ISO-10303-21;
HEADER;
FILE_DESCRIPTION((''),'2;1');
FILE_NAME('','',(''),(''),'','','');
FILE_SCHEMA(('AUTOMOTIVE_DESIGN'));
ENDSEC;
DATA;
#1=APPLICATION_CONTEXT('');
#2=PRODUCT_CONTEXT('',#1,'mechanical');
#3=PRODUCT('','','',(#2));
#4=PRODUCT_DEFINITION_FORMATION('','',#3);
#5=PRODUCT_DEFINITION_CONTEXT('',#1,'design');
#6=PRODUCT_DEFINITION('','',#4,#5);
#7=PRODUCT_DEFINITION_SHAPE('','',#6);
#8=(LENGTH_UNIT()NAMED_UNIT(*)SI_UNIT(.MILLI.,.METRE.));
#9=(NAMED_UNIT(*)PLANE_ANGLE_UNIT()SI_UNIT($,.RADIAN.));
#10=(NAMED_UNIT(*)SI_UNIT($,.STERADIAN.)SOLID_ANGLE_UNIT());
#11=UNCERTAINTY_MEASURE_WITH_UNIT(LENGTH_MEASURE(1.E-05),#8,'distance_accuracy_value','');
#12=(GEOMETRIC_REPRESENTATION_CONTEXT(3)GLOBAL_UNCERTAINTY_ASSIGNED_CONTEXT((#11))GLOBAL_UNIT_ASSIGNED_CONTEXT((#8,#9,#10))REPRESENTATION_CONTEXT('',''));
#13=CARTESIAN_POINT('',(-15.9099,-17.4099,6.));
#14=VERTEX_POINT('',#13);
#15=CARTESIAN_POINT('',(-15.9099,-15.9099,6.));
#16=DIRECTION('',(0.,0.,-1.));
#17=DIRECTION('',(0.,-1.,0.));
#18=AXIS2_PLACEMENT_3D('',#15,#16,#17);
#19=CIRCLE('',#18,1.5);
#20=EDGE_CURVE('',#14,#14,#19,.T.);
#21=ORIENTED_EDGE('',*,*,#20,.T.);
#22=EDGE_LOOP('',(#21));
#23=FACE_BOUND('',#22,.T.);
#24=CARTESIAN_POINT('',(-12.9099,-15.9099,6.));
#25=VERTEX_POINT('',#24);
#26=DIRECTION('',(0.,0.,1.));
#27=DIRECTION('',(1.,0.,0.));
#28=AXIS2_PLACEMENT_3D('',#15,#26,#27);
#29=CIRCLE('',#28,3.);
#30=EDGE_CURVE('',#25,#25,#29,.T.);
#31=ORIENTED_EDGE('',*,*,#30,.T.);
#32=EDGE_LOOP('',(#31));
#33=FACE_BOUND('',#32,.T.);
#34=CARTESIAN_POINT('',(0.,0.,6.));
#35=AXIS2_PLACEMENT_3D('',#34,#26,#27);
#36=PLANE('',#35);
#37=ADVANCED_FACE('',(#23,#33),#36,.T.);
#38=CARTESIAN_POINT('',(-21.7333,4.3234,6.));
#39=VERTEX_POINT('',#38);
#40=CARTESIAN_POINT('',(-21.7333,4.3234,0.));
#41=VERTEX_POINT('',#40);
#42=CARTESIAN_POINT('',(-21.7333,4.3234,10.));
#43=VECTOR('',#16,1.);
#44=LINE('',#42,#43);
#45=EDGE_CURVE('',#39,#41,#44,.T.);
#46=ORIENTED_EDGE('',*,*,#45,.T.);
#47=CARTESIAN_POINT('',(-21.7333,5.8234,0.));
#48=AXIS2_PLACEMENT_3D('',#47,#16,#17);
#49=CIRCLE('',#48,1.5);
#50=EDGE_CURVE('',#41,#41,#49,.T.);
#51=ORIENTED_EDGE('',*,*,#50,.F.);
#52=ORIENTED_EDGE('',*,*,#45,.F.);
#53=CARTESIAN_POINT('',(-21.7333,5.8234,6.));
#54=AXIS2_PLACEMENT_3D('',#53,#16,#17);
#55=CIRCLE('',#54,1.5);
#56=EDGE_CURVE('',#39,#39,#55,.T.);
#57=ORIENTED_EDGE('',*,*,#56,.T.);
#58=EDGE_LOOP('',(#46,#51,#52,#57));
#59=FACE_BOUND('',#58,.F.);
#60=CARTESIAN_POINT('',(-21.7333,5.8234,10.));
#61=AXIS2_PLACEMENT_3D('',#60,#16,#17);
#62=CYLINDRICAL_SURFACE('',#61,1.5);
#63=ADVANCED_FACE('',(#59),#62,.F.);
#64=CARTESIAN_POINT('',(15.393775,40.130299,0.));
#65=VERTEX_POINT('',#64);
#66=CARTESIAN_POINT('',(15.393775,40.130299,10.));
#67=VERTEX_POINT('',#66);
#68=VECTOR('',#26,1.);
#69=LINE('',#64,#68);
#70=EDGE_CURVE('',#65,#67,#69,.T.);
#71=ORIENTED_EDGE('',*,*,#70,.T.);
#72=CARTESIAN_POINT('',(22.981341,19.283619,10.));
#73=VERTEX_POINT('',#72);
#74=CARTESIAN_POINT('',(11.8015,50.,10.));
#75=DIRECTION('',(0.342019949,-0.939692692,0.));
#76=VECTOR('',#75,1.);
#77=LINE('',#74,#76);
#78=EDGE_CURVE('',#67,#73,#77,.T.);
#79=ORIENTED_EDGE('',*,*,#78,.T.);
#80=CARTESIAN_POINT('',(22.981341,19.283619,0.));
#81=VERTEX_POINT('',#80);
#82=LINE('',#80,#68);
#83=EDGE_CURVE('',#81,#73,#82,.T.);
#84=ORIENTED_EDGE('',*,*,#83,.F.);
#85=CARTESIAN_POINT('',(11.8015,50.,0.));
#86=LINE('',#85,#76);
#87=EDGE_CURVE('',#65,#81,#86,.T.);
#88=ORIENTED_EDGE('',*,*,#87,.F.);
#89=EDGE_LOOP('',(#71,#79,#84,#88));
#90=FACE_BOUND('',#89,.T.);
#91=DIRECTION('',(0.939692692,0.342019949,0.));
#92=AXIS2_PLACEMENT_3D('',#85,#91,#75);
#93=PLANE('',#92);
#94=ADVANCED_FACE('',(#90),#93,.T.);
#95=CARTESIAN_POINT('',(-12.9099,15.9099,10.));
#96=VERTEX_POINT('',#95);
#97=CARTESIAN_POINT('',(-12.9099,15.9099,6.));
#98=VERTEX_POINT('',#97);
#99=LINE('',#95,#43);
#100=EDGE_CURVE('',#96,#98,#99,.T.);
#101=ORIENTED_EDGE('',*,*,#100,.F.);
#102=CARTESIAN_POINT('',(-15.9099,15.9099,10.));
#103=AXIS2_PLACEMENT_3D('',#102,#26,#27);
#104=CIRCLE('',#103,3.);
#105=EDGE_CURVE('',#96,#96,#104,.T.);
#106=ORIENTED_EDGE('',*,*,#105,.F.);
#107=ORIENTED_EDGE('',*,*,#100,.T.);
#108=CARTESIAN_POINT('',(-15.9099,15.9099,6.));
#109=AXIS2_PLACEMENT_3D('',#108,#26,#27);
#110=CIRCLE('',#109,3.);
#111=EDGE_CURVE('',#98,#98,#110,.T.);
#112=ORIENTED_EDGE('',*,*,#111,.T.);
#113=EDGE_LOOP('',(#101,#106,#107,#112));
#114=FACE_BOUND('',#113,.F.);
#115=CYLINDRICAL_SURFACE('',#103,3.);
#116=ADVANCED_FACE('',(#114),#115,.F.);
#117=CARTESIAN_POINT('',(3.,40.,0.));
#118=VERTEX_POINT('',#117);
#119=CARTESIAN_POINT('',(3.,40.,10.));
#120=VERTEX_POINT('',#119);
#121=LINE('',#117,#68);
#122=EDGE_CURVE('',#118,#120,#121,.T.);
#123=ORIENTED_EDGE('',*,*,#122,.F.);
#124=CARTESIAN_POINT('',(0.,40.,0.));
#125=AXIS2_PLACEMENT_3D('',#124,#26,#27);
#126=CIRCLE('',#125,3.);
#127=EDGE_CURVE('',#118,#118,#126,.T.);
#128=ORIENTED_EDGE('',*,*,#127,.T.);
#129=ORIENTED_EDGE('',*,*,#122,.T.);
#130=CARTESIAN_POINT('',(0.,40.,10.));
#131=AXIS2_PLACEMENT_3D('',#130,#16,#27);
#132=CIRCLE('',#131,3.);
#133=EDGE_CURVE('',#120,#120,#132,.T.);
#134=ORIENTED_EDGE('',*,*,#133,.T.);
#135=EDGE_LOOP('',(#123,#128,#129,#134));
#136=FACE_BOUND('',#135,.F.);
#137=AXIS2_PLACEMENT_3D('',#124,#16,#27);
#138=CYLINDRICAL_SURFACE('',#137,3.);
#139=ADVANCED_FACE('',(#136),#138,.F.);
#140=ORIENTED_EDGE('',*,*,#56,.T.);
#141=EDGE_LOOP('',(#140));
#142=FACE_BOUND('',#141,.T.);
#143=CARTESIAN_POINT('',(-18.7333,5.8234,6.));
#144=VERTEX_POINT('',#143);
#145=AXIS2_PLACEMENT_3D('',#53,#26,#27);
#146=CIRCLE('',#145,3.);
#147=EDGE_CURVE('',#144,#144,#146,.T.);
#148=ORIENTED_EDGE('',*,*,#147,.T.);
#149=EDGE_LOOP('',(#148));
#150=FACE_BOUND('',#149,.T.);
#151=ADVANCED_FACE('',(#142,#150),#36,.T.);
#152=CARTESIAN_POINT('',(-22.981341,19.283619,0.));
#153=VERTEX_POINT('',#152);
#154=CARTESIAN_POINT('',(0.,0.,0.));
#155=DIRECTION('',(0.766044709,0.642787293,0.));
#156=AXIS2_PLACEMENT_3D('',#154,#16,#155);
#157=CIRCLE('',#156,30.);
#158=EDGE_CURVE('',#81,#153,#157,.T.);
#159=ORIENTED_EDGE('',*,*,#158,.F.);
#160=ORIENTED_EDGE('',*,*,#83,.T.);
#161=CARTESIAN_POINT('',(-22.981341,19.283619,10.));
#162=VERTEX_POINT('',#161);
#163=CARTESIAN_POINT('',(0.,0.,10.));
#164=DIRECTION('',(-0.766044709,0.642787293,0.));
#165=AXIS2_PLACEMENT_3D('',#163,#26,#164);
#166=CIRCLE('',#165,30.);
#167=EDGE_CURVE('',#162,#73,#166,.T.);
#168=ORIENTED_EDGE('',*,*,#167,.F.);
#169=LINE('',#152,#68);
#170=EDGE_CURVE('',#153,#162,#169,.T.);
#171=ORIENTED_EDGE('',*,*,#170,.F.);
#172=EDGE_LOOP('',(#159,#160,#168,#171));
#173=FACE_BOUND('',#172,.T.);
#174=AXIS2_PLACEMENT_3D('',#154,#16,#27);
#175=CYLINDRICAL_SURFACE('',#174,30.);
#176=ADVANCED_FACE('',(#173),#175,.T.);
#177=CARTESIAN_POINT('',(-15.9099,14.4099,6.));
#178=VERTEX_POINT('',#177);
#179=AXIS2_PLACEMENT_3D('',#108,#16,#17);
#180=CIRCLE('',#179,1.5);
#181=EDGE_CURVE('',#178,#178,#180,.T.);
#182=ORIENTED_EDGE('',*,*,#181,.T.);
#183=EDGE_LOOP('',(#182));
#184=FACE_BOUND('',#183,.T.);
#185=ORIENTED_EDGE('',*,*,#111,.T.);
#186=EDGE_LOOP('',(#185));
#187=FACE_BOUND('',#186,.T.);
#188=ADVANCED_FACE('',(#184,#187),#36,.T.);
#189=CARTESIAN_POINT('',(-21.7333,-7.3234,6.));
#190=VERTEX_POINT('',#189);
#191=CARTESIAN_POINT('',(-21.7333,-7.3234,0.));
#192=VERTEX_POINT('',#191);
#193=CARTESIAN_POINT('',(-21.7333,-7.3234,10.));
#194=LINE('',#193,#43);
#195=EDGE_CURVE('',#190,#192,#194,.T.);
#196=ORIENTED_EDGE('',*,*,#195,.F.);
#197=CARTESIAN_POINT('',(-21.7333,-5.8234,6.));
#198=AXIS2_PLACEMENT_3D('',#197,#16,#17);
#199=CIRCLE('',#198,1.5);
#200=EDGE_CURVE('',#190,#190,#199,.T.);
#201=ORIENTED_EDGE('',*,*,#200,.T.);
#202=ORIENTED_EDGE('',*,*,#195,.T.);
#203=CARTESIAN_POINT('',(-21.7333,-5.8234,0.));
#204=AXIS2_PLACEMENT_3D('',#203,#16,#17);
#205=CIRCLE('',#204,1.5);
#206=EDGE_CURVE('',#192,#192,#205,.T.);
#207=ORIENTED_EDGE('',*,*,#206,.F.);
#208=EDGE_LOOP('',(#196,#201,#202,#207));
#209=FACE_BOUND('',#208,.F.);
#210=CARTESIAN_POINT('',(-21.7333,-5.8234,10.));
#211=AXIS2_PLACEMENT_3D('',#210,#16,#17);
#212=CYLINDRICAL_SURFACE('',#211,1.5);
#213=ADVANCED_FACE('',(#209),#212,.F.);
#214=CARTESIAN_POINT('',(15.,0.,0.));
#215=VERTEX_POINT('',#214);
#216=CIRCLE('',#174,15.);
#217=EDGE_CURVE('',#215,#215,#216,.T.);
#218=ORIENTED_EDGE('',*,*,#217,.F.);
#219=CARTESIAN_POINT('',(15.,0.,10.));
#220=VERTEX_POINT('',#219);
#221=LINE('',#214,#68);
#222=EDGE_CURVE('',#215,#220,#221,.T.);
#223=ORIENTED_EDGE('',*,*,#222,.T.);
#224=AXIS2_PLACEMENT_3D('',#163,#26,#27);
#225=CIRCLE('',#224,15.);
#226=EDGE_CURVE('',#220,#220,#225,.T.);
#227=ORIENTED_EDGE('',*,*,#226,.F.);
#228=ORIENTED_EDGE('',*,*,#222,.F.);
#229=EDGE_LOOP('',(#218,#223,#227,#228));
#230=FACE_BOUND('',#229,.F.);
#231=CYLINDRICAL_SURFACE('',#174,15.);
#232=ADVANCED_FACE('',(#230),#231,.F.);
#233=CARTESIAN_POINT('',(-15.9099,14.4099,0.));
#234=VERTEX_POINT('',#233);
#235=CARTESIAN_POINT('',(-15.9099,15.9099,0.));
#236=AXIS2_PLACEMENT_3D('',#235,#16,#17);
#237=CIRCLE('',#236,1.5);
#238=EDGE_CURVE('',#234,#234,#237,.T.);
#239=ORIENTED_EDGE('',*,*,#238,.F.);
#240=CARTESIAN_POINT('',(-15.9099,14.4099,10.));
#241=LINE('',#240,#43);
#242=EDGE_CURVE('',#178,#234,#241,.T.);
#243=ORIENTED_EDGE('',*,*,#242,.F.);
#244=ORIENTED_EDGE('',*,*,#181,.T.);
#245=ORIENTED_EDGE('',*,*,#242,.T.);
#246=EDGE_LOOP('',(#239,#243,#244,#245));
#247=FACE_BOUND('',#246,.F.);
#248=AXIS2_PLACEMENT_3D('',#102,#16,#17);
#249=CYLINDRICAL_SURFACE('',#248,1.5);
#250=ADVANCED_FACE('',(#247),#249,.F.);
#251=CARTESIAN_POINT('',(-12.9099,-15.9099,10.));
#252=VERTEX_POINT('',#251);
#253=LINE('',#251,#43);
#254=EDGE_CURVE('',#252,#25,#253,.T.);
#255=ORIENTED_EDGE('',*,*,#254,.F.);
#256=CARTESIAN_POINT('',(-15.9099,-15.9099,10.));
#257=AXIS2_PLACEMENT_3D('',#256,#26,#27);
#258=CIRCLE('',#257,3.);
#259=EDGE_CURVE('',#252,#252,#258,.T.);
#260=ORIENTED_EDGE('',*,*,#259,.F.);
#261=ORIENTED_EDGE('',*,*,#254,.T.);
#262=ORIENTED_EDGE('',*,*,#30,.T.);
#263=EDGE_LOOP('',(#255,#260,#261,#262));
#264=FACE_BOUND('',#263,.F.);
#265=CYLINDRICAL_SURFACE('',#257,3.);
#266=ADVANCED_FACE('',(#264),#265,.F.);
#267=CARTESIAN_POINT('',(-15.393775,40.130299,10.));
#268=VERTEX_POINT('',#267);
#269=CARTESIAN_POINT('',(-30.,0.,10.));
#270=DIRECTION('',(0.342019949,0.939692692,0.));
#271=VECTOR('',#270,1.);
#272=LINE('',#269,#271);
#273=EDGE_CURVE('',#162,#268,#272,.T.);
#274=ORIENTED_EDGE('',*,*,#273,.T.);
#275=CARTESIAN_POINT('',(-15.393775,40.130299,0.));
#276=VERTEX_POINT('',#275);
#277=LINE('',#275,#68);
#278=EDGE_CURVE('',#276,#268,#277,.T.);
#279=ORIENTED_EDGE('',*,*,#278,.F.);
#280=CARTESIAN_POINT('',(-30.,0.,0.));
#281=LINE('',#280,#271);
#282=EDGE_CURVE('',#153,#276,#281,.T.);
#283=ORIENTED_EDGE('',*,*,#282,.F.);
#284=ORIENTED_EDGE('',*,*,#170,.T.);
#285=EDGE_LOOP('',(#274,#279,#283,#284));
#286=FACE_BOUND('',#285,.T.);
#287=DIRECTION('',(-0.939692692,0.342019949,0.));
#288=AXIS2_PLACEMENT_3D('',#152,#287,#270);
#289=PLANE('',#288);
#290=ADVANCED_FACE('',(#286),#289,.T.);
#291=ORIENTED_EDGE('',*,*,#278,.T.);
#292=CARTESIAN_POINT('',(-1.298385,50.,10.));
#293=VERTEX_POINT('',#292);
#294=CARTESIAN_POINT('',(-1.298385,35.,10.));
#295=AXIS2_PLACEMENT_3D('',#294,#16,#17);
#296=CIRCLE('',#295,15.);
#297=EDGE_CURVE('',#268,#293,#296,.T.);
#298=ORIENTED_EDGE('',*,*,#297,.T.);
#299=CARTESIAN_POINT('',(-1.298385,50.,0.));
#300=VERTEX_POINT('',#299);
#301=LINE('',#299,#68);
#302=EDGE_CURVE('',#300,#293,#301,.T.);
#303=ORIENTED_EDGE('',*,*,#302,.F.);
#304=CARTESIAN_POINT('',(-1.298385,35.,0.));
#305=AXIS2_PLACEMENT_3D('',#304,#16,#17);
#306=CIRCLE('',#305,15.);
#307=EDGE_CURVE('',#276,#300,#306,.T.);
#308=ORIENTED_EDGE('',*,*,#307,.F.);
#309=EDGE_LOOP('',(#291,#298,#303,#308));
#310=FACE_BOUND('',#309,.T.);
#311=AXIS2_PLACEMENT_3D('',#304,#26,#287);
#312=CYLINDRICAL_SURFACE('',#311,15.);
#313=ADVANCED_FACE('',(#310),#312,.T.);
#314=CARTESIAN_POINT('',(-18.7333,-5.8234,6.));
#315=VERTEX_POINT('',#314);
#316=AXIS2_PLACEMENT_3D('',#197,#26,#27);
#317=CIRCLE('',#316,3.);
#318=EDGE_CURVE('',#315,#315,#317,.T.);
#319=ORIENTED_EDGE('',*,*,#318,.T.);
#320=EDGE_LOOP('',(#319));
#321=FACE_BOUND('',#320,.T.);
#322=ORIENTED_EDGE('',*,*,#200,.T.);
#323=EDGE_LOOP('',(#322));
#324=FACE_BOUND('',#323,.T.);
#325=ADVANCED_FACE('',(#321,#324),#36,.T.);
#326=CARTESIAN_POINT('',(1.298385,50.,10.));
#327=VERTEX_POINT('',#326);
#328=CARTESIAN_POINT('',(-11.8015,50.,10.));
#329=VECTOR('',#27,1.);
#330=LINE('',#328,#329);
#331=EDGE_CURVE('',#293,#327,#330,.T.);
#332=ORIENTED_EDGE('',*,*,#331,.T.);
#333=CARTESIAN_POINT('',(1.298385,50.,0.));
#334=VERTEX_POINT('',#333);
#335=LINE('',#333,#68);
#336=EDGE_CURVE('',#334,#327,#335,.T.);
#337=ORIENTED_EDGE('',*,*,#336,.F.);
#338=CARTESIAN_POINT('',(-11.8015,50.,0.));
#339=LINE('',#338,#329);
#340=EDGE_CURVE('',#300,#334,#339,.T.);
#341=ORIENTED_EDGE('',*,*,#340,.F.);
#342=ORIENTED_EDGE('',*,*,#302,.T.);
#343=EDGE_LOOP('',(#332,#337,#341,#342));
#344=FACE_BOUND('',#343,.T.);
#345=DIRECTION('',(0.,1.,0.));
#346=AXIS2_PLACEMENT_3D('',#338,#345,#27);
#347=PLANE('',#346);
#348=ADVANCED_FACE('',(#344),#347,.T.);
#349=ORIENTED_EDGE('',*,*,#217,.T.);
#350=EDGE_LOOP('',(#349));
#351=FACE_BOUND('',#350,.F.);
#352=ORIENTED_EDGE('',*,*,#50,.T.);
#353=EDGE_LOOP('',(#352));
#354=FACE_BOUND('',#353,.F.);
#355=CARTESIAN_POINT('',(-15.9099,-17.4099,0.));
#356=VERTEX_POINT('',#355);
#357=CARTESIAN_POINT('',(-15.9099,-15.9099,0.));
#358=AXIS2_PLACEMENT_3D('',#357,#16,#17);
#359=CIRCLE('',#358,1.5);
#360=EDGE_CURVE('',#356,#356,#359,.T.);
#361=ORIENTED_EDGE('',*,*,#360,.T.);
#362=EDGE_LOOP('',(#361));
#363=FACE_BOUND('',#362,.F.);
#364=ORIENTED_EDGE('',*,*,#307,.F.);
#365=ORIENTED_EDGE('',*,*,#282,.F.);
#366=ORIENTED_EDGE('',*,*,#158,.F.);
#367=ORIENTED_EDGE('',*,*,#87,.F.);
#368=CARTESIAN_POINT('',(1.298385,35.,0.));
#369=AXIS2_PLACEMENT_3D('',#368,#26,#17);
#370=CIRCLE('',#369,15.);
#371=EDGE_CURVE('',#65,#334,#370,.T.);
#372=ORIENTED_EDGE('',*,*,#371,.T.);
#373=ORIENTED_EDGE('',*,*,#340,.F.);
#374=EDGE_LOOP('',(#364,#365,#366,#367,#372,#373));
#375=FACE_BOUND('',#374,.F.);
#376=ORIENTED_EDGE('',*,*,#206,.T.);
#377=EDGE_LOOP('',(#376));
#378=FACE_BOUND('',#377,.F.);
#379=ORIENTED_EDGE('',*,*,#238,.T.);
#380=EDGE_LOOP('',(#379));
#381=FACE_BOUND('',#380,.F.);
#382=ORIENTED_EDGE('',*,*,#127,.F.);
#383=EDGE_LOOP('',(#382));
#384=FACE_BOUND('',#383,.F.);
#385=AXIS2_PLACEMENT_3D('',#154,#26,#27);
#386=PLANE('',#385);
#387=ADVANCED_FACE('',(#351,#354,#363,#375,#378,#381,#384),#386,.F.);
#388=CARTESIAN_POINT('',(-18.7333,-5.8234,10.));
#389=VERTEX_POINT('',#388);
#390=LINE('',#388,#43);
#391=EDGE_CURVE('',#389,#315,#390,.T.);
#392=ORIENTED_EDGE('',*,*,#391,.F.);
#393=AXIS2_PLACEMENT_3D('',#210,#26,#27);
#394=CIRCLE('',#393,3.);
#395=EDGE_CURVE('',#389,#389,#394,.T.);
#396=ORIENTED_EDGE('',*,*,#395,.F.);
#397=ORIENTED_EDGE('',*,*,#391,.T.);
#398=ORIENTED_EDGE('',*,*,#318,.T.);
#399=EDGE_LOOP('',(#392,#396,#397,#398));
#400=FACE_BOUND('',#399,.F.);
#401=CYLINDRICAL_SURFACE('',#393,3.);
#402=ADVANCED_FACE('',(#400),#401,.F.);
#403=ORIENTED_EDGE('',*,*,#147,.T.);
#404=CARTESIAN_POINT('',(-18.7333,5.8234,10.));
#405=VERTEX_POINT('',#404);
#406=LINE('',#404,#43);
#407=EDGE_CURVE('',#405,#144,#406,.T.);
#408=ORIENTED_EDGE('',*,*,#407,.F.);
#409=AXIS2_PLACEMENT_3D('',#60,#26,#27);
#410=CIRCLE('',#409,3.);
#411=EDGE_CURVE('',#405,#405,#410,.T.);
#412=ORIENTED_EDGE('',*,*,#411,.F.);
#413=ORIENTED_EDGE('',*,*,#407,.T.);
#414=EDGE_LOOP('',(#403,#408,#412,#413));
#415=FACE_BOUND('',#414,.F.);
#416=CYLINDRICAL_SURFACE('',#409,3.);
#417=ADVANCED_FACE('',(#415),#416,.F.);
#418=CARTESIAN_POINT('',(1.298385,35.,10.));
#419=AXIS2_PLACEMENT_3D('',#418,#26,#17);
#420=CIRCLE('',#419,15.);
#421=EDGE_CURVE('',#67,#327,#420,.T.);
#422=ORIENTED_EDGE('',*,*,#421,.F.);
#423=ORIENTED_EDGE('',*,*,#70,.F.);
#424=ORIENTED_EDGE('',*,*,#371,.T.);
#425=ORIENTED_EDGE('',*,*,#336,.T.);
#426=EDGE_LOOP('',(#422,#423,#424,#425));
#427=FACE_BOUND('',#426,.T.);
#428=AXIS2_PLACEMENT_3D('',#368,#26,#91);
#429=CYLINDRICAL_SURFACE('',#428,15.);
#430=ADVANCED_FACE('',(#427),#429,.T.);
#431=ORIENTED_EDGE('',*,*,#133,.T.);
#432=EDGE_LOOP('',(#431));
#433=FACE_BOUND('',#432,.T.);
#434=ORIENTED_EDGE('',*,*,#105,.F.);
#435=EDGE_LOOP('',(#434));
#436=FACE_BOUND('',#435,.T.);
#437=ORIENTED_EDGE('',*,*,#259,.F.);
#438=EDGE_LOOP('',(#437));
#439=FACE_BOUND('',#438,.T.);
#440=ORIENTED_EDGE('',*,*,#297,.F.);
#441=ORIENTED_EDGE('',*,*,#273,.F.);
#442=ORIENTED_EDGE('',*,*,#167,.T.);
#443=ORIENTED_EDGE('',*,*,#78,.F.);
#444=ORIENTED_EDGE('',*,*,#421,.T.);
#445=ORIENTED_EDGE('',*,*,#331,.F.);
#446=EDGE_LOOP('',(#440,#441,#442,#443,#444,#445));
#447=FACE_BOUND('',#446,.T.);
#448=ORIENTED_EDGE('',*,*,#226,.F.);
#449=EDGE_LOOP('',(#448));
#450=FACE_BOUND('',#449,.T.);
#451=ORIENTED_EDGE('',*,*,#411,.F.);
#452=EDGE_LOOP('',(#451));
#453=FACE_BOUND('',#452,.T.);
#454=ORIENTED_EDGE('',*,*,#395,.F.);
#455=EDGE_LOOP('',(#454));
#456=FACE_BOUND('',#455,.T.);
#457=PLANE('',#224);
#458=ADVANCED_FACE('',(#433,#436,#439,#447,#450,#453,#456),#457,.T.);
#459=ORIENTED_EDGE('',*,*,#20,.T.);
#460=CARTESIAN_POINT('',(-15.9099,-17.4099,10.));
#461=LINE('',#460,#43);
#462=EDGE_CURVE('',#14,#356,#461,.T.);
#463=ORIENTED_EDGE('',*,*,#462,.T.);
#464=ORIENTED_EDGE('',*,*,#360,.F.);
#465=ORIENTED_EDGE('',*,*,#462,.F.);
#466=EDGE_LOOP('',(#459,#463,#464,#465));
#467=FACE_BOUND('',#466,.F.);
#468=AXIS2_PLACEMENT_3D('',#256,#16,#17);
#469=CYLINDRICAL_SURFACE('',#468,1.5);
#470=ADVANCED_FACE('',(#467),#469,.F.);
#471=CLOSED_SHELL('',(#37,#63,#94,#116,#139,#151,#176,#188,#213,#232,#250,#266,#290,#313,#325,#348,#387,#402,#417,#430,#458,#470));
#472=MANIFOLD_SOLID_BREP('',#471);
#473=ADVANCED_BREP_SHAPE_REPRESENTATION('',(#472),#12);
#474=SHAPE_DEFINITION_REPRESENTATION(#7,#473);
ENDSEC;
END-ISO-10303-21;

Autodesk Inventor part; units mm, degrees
ref_plane "YZ Plane" through (0, 0, 0) normal (1, 0, 0) x (0, 1, 0)
ref_plane "XZ Plane" through (0, 0, 0) normal (0, 1, 0) x (-1, 0, 0)
ref_plane "XY Plane" through (0, 0, 0) normal (0, 0, 1) x (1, 0, 0)
sketch "スケッチ12" plane through (0, 0, 0) normal (0, 0, 1) x (1, 0, 0)
  circle A0 centre (0, 0) radius 30
  circle A1 centre (0, 0) radius 15
  line L0 (-30, 0) -> (30, 0)
  line L1 (-30, 0) -> (-11.8015, 50)
  line L2 (-11.8015, 50) -> (11.8015, 50)
  line L3 (11.8015, 50) -> (30, 0)
  circle A2 centre (0, 40) radius 3
  line L4 (11.8015, 50) -> (-30, 0)
  line L5 (-11.8015, 50) -> (30, 0)
  point P0 (22.9813, 19.2836)
  point P1 (-22.9813, 19.2836)
  point P2 (0, 51.9615)
  point P3 (5.316, 29.5252)
  point P4 (-5.316, 29.5252)
  point P5 (-2.2669, 48.0351)
  point P6 (2.2669, 48.0351)
  point P7 (0, 35.8839)
  point P8 (-15, 0)
  point P9 (15, 0)
  dimension "d5" = 60
  dimension "d6" = 30
  dimension "d10" = 70
  dimension "d11" = 70
  dimension "d12" = 50
  dimension "d13" = 40
  dimension "d14" = 6
  dimension "d38" = 30
extrude "押し出し2" add sketch "スケッチ12" along normal blind 10 contours L0 A1 A0 | L4 A0 L5 L0 A1 | A0 L1 | L1 A0 L4 | L3 A0 | L5 A0 L3 | L1 L5 A2 L4 A0 | L4 L5 A0 | A0 L5 L4 A2 L3 | L2 L4 A2 L5 | L5 A2 L4 picked at (0.1887, 36.6459)
sketch "スケッチ13" plane through (0, 0, 10) normal (0, 0, 1) x (1, 0, 0)
  circle A0 centre (0, 0) radius 20
  circle A1 centre (0, 0) radius 25
  circle A2 centre (0, 0) radius 22.5
  line L0 (0, 0) -> (-18.638, 32.282)
  line L1 (-18.638, 32.282) -> (0, 0)
  line L2 (0, 0) -> (-17.2844, -29.9374)
  line L3 (0, 0) -> (-56.8729, 0)
  line L4 (0, 0) -> (-31.7394, -18.3248)
  line L5 (0, 0) -> (-33.3883, 19.2767)
  line L6 (0, 0) -> (0, -31.9785)
  line L7 (0, 0) -> (-25.7143, 25.7143)
  line L8 (0, 0) -> (-33.0547, 8.857)
  line L9 (0, 0) -> (-32.621, -8.7408)
  line L10 (0, 0) -> (-23.652, -23.652)
  point P0 (-19.4856, 11.25)
  point P1 (-22.5, 0)
  point P2 (-19.4856, -11.25)
  point P3 (-11.25, -19.4856)
  point P4 (0, -22.5)
  point P5 (-16.5273, 4.4285)
  point P6 (-15.9099, 15.9099)
  point P7 (-21.7333, 5.8234)
  point P8 (-21.7333, -5.8234)
  point P9 (-15.9099, -15.9099)
  dimension "d19" = 45
  dimension "d17" = 40
  dimension "d18" = 50
  dimension "d20" = 60
  dimension "d21" = 60
  dimension "d22" = 30
  dimension "d23" = 30
  dimension "d31" = 150
  dimension "d32" = 15
  dimension "d34" = 15
  dimension "d35" = 15
  dimension "d36" = 15
hole "穴1" at (-15.9099, 15.9099, 10) at (-21.7333, 5.8234, 10) at (-21.7333, -5.8234, 10) at (-15.9099, -15.9099, 10) direction (0, 0, -1) diameter 3 end through all
sketch "スケッチ14" plane through (0, 0, 10) normal (0, 0, 1) x (1, 0, 0)
  circle A0 centre (-15.9099, 15.9099) radius 1.5 projected
  circle A1 centre (-15.9099, 15.9099) radius 3
  circle A2 centre (-21.7333, 5.8234) radius 1.5 projected
  circle A3 centre (-21.7333, 5.8234) radius 3
  circle A4 centre (-21.7333, -5.8234) radius 1.5 projected
  circle A5 centre (-21.7333, -5.8234) radius 3
  circle A6 centre (-15.9099, -15.9099) radius 1.5 projected
  circle A7 centre (-15.9099, -15.9099) radius 3
  point P0 (0, 0)
  dimension "d40" = 6
  dimension "d41" = 6
  dimension "d42" = 6
  dimension "d43" = 6
extrude "押し出し3" cut sketch "スケッチ14" against normal blind 4 contours A0 | A1 | A2 | A3 | A4 | A5 | A6 | A7
fillet "フィレット2" radius 15 2 edges at (-11.8015, 50, 5) (11.8015, 50, 5)
equation "\"d10\" = d11"
equation "\"d35\" = d34"
equation "\"d36\" = d35"
equation "\"d41\" = d40"
equation "\"d42\" = d41"
equation "\"d43\" = d42"
properties part number "legparts_04(six)"
